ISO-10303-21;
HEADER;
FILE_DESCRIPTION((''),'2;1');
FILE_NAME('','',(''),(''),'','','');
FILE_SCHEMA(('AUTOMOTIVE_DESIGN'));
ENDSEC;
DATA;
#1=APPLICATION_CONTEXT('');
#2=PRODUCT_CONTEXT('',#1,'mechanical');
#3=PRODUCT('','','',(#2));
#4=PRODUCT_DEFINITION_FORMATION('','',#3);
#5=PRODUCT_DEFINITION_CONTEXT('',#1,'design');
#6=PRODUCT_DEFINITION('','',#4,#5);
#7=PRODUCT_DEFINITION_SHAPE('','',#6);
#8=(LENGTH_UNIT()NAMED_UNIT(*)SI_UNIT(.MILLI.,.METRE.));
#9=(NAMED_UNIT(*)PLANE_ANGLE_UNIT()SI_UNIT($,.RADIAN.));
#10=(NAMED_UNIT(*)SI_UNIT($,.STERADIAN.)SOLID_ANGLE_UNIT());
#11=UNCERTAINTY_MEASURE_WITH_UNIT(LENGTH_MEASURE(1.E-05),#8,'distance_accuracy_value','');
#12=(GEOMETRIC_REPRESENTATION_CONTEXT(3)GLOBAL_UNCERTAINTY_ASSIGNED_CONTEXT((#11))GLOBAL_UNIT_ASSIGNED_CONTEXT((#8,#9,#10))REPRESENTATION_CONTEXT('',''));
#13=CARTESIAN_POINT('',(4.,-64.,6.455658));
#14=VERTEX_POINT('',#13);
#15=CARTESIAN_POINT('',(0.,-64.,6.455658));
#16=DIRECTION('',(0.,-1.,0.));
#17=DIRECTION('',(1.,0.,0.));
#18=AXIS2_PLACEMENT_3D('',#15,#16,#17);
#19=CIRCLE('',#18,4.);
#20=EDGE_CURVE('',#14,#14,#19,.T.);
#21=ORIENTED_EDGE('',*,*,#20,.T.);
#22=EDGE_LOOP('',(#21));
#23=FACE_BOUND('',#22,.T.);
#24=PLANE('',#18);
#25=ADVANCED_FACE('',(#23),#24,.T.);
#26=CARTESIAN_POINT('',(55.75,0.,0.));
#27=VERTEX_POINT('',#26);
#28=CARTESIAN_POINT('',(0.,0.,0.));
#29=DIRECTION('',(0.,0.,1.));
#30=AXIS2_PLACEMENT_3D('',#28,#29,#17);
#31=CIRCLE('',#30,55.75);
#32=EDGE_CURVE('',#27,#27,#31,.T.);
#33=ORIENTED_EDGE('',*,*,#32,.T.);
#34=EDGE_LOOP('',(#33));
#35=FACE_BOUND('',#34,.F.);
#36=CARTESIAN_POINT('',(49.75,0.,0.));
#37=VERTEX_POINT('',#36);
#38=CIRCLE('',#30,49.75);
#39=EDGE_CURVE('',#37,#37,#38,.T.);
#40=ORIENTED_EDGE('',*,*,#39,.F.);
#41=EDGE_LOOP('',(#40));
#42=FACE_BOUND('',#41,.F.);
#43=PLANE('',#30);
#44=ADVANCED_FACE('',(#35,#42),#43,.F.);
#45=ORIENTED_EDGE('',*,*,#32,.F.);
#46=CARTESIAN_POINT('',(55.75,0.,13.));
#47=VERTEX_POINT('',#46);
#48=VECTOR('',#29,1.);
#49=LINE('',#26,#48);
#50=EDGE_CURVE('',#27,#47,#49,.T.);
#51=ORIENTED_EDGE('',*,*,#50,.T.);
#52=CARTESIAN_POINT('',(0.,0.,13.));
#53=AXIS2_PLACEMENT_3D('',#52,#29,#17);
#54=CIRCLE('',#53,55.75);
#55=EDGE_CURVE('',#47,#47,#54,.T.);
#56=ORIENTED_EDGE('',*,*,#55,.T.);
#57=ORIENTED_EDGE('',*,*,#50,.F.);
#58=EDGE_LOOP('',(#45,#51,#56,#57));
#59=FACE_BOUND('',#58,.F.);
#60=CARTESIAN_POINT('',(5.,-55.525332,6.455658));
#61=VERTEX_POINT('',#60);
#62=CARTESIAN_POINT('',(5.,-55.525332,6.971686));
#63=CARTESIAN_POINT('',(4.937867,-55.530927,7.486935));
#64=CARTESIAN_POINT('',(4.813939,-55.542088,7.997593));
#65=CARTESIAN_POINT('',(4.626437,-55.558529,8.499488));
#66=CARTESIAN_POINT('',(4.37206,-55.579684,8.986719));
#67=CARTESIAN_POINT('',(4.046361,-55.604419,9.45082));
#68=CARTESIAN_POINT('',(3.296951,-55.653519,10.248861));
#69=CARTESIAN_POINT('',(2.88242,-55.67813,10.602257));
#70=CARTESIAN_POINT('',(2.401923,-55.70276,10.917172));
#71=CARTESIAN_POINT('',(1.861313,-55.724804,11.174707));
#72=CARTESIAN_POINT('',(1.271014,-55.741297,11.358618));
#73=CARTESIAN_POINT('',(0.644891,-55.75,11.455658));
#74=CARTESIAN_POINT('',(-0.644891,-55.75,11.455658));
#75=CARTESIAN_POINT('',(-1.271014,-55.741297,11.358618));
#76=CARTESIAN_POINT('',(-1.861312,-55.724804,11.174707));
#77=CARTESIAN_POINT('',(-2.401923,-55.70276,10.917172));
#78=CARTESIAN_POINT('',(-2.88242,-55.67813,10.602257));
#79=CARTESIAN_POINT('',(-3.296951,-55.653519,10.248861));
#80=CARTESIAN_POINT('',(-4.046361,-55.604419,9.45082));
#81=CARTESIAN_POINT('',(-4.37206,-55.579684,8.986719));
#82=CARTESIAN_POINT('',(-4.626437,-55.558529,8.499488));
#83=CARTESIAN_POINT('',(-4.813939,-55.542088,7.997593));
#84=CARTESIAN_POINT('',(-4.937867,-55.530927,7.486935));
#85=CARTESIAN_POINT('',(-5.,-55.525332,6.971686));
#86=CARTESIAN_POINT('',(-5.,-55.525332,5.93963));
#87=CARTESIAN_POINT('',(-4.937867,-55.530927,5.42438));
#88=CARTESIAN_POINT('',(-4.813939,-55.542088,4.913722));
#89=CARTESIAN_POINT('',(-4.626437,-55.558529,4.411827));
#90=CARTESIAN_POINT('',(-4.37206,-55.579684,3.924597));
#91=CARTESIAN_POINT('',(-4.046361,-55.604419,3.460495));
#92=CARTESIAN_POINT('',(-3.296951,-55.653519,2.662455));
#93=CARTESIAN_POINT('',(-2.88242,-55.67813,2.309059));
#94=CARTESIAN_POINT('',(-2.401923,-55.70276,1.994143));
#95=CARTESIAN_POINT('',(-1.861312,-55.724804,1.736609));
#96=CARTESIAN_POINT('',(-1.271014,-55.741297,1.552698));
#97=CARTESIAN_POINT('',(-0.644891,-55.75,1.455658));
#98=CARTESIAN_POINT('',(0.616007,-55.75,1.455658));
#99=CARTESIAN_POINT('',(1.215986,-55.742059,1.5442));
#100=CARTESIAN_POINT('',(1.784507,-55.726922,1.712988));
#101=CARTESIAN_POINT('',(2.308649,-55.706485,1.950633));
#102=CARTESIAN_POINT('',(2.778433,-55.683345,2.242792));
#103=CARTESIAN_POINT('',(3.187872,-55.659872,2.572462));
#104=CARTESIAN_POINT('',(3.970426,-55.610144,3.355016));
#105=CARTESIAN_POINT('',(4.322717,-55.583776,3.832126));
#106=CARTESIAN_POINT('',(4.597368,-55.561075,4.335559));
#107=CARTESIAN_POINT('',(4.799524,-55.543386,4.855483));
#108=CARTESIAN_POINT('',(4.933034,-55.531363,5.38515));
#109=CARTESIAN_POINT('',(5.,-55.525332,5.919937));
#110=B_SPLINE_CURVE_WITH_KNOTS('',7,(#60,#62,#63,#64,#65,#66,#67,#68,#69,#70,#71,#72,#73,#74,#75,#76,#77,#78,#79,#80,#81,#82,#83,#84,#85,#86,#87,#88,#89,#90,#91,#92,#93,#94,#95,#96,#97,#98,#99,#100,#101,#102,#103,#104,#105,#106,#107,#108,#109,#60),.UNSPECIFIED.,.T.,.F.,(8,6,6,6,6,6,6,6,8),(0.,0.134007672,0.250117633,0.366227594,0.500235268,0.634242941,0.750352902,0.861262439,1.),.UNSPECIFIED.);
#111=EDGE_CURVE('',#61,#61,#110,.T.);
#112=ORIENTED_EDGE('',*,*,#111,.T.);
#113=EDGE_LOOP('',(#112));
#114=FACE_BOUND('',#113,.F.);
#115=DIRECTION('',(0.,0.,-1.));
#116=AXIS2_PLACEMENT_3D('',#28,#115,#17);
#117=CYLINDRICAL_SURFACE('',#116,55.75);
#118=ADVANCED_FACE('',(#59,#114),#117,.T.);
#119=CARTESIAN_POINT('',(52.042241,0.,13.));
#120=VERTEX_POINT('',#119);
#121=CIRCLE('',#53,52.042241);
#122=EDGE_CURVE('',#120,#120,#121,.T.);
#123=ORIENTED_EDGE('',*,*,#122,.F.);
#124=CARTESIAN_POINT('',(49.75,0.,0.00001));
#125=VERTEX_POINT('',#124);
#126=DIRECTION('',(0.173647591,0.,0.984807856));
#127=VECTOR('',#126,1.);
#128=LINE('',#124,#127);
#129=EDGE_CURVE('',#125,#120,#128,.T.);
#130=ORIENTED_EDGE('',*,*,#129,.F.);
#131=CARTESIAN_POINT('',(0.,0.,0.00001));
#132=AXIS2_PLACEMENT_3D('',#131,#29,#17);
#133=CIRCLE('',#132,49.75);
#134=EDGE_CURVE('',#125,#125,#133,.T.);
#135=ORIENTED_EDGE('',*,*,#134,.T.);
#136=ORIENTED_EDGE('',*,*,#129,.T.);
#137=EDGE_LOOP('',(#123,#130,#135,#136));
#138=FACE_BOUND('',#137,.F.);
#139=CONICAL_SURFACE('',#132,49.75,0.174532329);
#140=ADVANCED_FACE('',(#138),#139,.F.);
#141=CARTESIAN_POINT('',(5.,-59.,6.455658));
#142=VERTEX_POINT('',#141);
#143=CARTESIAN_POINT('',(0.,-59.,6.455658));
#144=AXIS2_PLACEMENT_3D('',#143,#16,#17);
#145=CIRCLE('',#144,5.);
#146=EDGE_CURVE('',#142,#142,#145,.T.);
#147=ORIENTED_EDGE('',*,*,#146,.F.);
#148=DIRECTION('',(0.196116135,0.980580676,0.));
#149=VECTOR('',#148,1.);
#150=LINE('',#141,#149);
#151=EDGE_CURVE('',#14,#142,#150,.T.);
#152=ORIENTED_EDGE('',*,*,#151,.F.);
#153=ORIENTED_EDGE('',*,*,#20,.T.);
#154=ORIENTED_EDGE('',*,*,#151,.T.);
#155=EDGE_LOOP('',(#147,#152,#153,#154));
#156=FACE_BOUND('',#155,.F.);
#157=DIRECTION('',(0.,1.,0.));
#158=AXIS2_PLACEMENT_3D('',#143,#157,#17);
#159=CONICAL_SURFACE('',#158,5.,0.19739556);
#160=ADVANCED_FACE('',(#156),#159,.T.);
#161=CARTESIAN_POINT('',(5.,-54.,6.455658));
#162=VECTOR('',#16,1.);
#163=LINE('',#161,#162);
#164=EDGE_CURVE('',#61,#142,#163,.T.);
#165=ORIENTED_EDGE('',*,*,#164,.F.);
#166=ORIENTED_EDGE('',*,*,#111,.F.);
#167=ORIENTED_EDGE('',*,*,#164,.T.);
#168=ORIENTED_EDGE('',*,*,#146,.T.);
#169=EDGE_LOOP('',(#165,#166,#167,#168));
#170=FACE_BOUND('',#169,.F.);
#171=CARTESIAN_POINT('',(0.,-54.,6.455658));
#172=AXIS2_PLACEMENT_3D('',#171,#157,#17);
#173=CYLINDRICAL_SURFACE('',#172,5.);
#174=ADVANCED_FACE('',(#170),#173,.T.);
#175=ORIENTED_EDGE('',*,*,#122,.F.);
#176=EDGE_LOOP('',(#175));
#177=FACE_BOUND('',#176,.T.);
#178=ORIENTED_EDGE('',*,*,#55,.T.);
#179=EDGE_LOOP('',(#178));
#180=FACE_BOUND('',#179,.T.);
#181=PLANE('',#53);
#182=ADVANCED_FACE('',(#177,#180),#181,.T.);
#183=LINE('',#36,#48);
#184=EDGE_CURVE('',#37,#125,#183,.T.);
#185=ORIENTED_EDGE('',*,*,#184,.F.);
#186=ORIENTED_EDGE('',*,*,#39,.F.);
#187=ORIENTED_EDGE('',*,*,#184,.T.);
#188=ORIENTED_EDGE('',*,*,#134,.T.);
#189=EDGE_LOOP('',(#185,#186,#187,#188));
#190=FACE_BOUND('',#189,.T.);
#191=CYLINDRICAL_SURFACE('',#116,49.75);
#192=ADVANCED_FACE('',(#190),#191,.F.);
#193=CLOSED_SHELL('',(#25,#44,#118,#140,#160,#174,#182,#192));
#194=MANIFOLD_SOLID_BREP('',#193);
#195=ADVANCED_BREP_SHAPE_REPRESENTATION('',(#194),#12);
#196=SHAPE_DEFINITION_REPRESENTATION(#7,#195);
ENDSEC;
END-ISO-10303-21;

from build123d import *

# Parameters (mm, degrees)
F0_R     = 55.750000441
F0_R_2   = 49.75
F1_DEPTH = 13
F3_R     = 5
F4_DEPTH = 10
F5_SIZE2 = 2.292241
F5_SIZE  = 12.99999
F6_SIZE2 = 5
F6_SIZE  = 1


# Not quite as in the source:
# - a fillet or chamfer is up to 0.001 mm smaller than in the source, because OpenCascade refuses the exact size


with BuildPart() as f1:
    # F0 (on Top) → F1 (new body)
    with BuildSketch(Plane.XY):
        Circle(F0_R)
        Circle(F0_R_2, mode=Mode.SUBTRACT)
    extrude(amount=F1_DEPTH)

    # F3 (on offset) → F4 (join)
    with BuildSketch(Plane.XZ.offset(54)):
        with Locations((0, 6.4556576599)):
            Circle(F3_R)
    extrude(amount=F4_DEPTH)

    # F5 (size 13 and 2.2922507492 in the source; OpenCascade refuses exactly that, so slightly less here)
    f5_edges = [f1.edges().sort_by_distance(p)[0] for p in [
        (-49.75, 0, 13),
    ]]
    f5_side = f1.faces().sort_by_distance((-49.75, 0, 6.5))[0]
    chamfer(f5_edges, length=F5_SIZE, length2=F5_SIZE2, reference=f5_side)

    # F6
    f6_edges = [f1.edges().sort_by_distance(p)[0] for p in [
        (-5, -64, 6.455658),
    ]]
    f6_side = f1.faces().sort_by_distance((0, -64, 6.455658))[0]
    chamfer(f6_edges, length=F6_SIZE, length2=F6_SIZE2, reference=f6_side)


solid = f1.part
